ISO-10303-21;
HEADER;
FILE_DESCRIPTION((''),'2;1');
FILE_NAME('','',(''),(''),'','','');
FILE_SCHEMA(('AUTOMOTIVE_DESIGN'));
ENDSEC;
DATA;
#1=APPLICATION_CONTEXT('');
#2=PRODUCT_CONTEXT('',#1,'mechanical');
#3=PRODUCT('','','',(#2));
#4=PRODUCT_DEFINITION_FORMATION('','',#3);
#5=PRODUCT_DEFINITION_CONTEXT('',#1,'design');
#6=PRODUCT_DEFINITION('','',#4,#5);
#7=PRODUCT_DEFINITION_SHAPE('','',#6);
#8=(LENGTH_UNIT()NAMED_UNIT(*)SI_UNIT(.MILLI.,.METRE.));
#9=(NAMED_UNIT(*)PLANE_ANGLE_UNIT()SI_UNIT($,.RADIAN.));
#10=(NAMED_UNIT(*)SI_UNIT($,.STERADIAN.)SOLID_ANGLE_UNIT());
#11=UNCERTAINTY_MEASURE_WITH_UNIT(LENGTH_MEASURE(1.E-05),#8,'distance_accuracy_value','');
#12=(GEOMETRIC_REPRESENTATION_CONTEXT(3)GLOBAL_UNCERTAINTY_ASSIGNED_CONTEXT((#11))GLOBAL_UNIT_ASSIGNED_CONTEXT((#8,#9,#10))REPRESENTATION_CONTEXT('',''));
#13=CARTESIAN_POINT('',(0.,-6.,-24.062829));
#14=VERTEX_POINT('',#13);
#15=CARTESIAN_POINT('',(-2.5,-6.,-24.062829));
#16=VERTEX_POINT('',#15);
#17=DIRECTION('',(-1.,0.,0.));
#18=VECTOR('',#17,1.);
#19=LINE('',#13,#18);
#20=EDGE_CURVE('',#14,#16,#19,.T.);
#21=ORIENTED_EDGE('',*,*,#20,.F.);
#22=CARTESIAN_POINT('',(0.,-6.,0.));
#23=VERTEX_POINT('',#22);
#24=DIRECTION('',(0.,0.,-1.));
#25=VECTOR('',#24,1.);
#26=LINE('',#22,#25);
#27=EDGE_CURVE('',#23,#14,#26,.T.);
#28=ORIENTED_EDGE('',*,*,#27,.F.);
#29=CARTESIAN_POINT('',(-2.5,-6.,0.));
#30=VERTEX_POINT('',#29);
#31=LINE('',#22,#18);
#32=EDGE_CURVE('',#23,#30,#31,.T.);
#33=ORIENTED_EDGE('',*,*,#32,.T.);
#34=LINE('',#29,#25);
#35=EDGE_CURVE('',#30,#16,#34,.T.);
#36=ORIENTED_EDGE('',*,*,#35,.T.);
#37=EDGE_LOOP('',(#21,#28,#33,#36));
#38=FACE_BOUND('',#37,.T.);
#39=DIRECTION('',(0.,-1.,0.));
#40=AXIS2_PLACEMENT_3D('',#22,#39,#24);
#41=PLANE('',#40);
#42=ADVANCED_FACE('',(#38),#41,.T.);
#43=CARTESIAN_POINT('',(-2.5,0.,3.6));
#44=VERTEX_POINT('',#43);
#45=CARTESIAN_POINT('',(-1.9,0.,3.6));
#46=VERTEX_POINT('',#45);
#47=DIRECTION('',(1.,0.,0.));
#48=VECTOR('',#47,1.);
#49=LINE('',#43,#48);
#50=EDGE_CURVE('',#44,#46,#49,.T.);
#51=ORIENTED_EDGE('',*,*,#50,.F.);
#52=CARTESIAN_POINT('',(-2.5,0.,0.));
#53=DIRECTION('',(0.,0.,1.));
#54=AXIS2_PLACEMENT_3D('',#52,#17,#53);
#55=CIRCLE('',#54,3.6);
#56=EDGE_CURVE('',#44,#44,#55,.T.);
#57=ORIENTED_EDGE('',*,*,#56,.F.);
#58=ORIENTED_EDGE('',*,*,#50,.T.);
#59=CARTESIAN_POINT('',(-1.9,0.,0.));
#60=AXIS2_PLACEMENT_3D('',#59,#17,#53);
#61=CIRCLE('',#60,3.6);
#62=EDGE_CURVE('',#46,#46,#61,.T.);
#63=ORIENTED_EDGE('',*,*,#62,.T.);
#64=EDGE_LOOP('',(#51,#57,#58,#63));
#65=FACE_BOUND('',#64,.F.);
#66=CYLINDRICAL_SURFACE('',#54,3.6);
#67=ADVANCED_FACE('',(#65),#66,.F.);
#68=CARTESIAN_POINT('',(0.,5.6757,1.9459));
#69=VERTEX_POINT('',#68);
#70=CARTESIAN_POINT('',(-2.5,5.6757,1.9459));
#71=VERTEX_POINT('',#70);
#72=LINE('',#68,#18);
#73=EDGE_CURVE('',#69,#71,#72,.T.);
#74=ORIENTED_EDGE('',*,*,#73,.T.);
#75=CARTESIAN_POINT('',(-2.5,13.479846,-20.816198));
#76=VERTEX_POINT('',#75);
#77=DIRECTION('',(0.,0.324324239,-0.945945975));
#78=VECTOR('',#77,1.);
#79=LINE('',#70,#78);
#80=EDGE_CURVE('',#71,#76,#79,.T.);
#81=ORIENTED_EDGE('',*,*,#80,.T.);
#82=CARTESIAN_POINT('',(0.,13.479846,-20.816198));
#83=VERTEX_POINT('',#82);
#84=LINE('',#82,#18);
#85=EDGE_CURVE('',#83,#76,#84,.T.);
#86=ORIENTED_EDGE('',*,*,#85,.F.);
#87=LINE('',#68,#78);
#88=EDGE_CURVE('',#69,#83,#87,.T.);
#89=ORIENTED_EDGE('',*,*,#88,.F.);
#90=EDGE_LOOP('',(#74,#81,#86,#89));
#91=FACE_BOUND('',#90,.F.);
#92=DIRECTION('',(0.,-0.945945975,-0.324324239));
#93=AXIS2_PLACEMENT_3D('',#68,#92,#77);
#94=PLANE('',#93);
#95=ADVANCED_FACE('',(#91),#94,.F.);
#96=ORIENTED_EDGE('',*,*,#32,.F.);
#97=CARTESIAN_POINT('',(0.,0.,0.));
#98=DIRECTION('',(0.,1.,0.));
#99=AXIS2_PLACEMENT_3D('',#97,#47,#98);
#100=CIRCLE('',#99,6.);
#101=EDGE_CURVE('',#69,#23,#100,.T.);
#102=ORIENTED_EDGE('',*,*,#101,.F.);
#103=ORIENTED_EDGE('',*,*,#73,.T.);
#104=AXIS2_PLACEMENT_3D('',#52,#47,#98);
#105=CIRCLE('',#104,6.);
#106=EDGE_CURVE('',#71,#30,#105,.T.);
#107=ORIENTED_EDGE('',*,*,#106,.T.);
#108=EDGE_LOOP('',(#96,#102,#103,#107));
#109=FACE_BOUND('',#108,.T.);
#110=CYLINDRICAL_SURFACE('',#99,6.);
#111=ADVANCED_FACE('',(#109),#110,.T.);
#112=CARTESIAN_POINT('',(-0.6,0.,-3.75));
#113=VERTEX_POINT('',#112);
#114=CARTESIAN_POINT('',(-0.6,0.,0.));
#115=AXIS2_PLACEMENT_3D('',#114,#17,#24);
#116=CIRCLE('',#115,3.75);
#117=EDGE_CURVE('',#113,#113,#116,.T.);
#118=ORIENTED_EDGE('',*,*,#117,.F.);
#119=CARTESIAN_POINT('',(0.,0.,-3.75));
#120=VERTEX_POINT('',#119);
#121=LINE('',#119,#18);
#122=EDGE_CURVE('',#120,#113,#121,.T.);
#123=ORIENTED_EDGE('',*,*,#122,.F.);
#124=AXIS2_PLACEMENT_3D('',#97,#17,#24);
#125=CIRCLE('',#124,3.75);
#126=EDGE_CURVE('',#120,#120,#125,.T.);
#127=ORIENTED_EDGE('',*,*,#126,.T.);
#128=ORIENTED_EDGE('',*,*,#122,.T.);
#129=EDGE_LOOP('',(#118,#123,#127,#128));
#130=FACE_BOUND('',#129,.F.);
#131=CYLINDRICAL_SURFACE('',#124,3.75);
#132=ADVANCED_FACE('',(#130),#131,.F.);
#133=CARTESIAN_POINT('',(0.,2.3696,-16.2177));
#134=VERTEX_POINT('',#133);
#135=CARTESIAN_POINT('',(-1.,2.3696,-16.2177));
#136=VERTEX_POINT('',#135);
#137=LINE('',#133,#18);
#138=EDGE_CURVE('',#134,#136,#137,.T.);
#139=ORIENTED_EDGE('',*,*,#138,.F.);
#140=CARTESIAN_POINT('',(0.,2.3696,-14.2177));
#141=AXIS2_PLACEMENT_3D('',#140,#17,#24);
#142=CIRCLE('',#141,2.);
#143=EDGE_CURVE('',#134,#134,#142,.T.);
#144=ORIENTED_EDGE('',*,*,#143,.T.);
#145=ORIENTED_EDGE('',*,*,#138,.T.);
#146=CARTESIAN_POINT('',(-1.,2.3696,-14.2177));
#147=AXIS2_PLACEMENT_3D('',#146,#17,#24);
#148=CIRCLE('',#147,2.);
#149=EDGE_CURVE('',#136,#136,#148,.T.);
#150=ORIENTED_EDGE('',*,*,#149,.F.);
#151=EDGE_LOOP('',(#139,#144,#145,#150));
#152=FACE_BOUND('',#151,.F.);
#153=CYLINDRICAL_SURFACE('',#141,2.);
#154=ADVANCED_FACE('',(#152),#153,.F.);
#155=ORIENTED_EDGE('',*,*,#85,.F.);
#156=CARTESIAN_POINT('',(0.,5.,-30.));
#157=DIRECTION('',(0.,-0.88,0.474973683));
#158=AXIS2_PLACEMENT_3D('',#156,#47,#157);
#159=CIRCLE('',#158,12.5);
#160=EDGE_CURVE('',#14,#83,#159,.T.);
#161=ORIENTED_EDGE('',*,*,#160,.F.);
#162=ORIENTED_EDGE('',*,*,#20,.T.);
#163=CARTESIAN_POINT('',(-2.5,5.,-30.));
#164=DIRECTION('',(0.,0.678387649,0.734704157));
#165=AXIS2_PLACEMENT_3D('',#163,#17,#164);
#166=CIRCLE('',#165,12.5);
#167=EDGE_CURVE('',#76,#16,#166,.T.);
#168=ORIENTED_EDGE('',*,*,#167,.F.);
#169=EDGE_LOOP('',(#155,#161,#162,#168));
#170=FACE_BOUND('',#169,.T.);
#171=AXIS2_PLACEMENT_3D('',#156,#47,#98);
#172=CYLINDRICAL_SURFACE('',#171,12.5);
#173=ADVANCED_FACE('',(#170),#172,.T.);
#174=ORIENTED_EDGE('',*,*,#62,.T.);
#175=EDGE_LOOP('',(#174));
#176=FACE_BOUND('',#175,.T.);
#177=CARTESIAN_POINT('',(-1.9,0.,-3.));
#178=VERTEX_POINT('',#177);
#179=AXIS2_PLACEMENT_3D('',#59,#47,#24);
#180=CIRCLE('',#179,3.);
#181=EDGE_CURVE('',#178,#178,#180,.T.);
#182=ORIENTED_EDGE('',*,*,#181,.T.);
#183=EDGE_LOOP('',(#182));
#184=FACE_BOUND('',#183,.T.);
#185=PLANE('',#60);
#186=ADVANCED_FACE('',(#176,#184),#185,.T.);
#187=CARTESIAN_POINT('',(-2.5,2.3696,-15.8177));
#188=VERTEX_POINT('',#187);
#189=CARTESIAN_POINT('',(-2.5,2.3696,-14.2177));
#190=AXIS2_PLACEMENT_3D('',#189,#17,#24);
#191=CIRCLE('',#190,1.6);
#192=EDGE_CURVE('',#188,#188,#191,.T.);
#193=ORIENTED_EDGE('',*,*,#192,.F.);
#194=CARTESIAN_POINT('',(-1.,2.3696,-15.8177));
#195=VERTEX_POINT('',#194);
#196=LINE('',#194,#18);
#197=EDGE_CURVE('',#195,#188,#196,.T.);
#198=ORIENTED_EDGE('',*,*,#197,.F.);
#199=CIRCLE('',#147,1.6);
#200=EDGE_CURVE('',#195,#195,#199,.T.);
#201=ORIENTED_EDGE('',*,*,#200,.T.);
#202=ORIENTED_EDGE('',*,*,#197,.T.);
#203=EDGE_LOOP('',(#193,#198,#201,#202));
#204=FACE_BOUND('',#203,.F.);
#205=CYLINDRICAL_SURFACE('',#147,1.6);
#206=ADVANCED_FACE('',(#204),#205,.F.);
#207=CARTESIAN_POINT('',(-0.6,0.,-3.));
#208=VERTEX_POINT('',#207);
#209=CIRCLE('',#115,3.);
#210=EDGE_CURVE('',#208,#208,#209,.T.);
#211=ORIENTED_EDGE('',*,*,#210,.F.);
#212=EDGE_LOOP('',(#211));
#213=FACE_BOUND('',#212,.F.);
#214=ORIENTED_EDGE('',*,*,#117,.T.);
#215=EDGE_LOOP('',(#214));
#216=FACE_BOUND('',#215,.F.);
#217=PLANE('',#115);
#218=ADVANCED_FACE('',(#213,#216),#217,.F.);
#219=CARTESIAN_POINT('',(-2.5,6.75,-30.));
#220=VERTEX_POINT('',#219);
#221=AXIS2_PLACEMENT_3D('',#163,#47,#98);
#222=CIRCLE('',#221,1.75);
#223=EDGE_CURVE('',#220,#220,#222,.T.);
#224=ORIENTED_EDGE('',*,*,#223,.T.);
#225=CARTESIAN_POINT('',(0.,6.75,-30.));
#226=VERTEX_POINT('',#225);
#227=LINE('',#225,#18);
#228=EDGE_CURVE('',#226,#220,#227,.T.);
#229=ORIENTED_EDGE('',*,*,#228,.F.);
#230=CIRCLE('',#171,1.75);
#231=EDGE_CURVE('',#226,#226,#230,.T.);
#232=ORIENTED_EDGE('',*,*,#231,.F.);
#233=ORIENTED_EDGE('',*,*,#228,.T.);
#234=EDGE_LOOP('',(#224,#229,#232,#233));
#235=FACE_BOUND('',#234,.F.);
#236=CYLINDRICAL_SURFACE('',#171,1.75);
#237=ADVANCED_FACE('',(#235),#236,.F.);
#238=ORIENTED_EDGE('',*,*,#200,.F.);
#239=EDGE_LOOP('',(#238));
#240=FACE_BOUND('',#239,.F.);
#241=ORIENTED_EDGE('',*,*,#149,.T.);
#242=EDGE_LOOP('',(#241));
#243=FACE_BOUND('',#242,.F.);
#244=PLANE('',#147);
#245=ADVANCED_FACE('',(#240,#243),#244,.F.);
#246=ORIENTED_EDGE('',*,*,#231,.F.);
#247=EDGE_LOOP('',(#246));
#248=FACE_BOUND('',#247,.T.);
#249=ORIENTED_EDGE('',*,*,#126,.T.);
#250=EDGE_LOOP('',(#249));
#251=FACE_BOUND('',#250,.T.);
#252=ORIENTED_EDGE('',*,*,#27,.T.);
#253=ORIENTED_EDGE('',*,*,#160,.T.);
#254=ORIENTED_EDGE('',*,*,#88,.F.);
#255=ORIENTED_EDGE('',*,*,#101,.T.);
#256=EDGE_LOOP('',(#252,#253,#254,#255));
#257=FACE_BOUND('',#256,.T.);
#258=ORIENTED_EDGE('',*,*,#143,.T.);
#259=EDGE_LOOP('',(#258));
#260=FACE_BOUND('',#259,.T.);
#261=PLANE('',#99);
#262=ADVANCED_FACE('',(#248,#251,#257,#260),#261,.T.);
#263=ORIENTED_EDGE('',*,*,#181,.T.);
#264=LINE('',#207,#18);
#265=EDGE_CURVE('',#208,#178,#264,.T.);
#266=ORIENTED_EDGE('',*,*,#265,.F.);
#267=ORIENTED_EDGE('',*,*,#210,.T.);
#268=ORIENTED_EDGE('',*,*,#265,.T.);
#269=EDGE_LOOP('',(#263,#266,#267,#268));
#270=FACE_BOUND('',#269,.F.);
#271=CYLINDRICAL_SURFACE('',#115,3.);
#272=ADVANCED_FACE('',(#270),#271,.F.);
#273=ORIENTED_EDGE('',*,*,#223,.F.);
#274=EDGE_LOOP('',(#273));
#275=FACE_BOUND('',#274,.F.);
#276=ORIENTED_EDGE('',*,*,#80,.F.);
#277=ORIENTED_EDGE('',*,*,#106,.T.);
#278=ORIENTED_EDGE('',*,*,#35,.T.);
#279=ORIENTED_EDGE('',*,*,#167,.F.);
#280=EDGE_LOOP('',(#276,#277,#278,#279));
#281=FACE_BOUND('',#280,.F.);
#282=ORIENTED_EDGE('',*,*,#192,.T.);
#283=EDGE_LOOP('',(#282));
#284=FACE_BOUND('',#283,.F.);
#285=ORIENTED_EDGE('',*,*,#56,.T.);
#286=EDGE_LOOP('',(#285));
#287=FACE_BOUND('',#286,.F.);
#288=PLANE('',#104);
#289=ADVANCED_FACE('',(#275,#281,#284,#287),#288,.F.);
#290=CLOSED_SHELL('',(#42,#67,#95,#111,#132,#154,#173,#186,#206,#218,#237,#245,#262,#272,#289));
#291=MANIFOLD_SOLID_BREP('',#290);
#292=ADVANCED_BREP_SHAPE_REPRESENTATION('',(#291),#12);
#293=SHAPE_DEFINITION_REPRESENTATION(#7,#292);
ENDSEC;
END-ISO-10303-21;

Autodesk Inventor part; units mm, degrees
ref_plane "YZ Plane" through (0, 0, 0) normal (1, 0, 0) x (0, 1, 0)
ref_plane "XZ Plane" through (0, 0, 0) normal (0, 1, 0) x (-1, 0, 0)
ref_plane "XY Plane" through (0, 0, 0) normal (0, 0, 1) x (1, 0, 0)
sketch "スケッチ1" plane through (0, 0, 0) normal (1, 0, 0) x (0, 1, 0)
  circle A0 centre (0, 0) radius 6
  circle A1 centre (5, -30) radius 11
  line L0 (-6, 0) -> (-6, -30)
  line L1 (5.6757, 1.9459) -> (15.4054, -26.4324)
  circle A2 centre (5, -30) radius 12.5
  circle A3 centre (0, 0) radius 3
  circle A4 centre (5, -30) radius 1.75
  line L2 (5, -30) -> (5, -41) construction
  circle A5 centre (0, 0) radius 4.5 construction
  circle A6 centre (5, -30) radius 2.5 construction
  line L3 (4.4778, 0.4463) -> (7.4877, -29.7521) construction
  line L4 (2.5664, -30.5723) -> (-4.3805, -1.0301) construction
  circle A7 centre (2.3696, -14.2177) radius 2
  circle A8 centre (2.3696, -14.2177) radius 1
  circle A9 centre (2.3696, -14.2177) radius 3.5522 construction
  line L5 (9.4297, -56.5784) -> (-3.4387, 20.6324) construction
  circle A10 centre (5, -30) radius 14 construction
  point P0 (-6, -24.0628)
  point P1 (13.4798, -20.8162)
  point P2 (15.9919, -30.4228)
  point P3 (-1.7415, -38.692)
  point P4 (13.8604, -21.1828)
  point P5 (-6.4987, -25.098)
  dimension "d0" = 12
  dimension "d1" = 22
  dimension "d2" = 30
  dimension "d3" = 25
  dimension "d4" = 6
  dimension "d5" = 3.5
  dimension "d21" = 9
  dimension "d22" = 5
  dimension "d23" = 2
  dimension "d24" = 4
  dimension "d35" = 28
extrude "押し出し1" add sketch "スケッチ1" against normal blind 2.5 contours A0 | A0 L1 A2 L0 | A2 L0 A1 L1 | L1 A1 L0 A2 | A1 | A3 | A7 | A8
sketch "スケッチ2" plane through (-2.5, 0, 0) normal (-1, 0, 0) x (0, 0, 1)
  circle A0 centre (0, 0) radius 3.6
  circle A1 centre (0, 0) radius 3 projected
  dimension "d8" = 7.2
extrude "押し出し2" cut sketch "スケッチ2" against normal blind 0.6
hole "穴1" at (0, 2.3696, -14.2177) direction (-1, 0, 0) diameter 3.2 end through all counterbore diameter 4 counterbore depth 1
hole "穴2" at (0, 0, 0) direction (-1, 0, 0) diameter 6 end through all counterbore diameter 7.5 counterbore depth 0.6
properties part number "Main_Frame"
